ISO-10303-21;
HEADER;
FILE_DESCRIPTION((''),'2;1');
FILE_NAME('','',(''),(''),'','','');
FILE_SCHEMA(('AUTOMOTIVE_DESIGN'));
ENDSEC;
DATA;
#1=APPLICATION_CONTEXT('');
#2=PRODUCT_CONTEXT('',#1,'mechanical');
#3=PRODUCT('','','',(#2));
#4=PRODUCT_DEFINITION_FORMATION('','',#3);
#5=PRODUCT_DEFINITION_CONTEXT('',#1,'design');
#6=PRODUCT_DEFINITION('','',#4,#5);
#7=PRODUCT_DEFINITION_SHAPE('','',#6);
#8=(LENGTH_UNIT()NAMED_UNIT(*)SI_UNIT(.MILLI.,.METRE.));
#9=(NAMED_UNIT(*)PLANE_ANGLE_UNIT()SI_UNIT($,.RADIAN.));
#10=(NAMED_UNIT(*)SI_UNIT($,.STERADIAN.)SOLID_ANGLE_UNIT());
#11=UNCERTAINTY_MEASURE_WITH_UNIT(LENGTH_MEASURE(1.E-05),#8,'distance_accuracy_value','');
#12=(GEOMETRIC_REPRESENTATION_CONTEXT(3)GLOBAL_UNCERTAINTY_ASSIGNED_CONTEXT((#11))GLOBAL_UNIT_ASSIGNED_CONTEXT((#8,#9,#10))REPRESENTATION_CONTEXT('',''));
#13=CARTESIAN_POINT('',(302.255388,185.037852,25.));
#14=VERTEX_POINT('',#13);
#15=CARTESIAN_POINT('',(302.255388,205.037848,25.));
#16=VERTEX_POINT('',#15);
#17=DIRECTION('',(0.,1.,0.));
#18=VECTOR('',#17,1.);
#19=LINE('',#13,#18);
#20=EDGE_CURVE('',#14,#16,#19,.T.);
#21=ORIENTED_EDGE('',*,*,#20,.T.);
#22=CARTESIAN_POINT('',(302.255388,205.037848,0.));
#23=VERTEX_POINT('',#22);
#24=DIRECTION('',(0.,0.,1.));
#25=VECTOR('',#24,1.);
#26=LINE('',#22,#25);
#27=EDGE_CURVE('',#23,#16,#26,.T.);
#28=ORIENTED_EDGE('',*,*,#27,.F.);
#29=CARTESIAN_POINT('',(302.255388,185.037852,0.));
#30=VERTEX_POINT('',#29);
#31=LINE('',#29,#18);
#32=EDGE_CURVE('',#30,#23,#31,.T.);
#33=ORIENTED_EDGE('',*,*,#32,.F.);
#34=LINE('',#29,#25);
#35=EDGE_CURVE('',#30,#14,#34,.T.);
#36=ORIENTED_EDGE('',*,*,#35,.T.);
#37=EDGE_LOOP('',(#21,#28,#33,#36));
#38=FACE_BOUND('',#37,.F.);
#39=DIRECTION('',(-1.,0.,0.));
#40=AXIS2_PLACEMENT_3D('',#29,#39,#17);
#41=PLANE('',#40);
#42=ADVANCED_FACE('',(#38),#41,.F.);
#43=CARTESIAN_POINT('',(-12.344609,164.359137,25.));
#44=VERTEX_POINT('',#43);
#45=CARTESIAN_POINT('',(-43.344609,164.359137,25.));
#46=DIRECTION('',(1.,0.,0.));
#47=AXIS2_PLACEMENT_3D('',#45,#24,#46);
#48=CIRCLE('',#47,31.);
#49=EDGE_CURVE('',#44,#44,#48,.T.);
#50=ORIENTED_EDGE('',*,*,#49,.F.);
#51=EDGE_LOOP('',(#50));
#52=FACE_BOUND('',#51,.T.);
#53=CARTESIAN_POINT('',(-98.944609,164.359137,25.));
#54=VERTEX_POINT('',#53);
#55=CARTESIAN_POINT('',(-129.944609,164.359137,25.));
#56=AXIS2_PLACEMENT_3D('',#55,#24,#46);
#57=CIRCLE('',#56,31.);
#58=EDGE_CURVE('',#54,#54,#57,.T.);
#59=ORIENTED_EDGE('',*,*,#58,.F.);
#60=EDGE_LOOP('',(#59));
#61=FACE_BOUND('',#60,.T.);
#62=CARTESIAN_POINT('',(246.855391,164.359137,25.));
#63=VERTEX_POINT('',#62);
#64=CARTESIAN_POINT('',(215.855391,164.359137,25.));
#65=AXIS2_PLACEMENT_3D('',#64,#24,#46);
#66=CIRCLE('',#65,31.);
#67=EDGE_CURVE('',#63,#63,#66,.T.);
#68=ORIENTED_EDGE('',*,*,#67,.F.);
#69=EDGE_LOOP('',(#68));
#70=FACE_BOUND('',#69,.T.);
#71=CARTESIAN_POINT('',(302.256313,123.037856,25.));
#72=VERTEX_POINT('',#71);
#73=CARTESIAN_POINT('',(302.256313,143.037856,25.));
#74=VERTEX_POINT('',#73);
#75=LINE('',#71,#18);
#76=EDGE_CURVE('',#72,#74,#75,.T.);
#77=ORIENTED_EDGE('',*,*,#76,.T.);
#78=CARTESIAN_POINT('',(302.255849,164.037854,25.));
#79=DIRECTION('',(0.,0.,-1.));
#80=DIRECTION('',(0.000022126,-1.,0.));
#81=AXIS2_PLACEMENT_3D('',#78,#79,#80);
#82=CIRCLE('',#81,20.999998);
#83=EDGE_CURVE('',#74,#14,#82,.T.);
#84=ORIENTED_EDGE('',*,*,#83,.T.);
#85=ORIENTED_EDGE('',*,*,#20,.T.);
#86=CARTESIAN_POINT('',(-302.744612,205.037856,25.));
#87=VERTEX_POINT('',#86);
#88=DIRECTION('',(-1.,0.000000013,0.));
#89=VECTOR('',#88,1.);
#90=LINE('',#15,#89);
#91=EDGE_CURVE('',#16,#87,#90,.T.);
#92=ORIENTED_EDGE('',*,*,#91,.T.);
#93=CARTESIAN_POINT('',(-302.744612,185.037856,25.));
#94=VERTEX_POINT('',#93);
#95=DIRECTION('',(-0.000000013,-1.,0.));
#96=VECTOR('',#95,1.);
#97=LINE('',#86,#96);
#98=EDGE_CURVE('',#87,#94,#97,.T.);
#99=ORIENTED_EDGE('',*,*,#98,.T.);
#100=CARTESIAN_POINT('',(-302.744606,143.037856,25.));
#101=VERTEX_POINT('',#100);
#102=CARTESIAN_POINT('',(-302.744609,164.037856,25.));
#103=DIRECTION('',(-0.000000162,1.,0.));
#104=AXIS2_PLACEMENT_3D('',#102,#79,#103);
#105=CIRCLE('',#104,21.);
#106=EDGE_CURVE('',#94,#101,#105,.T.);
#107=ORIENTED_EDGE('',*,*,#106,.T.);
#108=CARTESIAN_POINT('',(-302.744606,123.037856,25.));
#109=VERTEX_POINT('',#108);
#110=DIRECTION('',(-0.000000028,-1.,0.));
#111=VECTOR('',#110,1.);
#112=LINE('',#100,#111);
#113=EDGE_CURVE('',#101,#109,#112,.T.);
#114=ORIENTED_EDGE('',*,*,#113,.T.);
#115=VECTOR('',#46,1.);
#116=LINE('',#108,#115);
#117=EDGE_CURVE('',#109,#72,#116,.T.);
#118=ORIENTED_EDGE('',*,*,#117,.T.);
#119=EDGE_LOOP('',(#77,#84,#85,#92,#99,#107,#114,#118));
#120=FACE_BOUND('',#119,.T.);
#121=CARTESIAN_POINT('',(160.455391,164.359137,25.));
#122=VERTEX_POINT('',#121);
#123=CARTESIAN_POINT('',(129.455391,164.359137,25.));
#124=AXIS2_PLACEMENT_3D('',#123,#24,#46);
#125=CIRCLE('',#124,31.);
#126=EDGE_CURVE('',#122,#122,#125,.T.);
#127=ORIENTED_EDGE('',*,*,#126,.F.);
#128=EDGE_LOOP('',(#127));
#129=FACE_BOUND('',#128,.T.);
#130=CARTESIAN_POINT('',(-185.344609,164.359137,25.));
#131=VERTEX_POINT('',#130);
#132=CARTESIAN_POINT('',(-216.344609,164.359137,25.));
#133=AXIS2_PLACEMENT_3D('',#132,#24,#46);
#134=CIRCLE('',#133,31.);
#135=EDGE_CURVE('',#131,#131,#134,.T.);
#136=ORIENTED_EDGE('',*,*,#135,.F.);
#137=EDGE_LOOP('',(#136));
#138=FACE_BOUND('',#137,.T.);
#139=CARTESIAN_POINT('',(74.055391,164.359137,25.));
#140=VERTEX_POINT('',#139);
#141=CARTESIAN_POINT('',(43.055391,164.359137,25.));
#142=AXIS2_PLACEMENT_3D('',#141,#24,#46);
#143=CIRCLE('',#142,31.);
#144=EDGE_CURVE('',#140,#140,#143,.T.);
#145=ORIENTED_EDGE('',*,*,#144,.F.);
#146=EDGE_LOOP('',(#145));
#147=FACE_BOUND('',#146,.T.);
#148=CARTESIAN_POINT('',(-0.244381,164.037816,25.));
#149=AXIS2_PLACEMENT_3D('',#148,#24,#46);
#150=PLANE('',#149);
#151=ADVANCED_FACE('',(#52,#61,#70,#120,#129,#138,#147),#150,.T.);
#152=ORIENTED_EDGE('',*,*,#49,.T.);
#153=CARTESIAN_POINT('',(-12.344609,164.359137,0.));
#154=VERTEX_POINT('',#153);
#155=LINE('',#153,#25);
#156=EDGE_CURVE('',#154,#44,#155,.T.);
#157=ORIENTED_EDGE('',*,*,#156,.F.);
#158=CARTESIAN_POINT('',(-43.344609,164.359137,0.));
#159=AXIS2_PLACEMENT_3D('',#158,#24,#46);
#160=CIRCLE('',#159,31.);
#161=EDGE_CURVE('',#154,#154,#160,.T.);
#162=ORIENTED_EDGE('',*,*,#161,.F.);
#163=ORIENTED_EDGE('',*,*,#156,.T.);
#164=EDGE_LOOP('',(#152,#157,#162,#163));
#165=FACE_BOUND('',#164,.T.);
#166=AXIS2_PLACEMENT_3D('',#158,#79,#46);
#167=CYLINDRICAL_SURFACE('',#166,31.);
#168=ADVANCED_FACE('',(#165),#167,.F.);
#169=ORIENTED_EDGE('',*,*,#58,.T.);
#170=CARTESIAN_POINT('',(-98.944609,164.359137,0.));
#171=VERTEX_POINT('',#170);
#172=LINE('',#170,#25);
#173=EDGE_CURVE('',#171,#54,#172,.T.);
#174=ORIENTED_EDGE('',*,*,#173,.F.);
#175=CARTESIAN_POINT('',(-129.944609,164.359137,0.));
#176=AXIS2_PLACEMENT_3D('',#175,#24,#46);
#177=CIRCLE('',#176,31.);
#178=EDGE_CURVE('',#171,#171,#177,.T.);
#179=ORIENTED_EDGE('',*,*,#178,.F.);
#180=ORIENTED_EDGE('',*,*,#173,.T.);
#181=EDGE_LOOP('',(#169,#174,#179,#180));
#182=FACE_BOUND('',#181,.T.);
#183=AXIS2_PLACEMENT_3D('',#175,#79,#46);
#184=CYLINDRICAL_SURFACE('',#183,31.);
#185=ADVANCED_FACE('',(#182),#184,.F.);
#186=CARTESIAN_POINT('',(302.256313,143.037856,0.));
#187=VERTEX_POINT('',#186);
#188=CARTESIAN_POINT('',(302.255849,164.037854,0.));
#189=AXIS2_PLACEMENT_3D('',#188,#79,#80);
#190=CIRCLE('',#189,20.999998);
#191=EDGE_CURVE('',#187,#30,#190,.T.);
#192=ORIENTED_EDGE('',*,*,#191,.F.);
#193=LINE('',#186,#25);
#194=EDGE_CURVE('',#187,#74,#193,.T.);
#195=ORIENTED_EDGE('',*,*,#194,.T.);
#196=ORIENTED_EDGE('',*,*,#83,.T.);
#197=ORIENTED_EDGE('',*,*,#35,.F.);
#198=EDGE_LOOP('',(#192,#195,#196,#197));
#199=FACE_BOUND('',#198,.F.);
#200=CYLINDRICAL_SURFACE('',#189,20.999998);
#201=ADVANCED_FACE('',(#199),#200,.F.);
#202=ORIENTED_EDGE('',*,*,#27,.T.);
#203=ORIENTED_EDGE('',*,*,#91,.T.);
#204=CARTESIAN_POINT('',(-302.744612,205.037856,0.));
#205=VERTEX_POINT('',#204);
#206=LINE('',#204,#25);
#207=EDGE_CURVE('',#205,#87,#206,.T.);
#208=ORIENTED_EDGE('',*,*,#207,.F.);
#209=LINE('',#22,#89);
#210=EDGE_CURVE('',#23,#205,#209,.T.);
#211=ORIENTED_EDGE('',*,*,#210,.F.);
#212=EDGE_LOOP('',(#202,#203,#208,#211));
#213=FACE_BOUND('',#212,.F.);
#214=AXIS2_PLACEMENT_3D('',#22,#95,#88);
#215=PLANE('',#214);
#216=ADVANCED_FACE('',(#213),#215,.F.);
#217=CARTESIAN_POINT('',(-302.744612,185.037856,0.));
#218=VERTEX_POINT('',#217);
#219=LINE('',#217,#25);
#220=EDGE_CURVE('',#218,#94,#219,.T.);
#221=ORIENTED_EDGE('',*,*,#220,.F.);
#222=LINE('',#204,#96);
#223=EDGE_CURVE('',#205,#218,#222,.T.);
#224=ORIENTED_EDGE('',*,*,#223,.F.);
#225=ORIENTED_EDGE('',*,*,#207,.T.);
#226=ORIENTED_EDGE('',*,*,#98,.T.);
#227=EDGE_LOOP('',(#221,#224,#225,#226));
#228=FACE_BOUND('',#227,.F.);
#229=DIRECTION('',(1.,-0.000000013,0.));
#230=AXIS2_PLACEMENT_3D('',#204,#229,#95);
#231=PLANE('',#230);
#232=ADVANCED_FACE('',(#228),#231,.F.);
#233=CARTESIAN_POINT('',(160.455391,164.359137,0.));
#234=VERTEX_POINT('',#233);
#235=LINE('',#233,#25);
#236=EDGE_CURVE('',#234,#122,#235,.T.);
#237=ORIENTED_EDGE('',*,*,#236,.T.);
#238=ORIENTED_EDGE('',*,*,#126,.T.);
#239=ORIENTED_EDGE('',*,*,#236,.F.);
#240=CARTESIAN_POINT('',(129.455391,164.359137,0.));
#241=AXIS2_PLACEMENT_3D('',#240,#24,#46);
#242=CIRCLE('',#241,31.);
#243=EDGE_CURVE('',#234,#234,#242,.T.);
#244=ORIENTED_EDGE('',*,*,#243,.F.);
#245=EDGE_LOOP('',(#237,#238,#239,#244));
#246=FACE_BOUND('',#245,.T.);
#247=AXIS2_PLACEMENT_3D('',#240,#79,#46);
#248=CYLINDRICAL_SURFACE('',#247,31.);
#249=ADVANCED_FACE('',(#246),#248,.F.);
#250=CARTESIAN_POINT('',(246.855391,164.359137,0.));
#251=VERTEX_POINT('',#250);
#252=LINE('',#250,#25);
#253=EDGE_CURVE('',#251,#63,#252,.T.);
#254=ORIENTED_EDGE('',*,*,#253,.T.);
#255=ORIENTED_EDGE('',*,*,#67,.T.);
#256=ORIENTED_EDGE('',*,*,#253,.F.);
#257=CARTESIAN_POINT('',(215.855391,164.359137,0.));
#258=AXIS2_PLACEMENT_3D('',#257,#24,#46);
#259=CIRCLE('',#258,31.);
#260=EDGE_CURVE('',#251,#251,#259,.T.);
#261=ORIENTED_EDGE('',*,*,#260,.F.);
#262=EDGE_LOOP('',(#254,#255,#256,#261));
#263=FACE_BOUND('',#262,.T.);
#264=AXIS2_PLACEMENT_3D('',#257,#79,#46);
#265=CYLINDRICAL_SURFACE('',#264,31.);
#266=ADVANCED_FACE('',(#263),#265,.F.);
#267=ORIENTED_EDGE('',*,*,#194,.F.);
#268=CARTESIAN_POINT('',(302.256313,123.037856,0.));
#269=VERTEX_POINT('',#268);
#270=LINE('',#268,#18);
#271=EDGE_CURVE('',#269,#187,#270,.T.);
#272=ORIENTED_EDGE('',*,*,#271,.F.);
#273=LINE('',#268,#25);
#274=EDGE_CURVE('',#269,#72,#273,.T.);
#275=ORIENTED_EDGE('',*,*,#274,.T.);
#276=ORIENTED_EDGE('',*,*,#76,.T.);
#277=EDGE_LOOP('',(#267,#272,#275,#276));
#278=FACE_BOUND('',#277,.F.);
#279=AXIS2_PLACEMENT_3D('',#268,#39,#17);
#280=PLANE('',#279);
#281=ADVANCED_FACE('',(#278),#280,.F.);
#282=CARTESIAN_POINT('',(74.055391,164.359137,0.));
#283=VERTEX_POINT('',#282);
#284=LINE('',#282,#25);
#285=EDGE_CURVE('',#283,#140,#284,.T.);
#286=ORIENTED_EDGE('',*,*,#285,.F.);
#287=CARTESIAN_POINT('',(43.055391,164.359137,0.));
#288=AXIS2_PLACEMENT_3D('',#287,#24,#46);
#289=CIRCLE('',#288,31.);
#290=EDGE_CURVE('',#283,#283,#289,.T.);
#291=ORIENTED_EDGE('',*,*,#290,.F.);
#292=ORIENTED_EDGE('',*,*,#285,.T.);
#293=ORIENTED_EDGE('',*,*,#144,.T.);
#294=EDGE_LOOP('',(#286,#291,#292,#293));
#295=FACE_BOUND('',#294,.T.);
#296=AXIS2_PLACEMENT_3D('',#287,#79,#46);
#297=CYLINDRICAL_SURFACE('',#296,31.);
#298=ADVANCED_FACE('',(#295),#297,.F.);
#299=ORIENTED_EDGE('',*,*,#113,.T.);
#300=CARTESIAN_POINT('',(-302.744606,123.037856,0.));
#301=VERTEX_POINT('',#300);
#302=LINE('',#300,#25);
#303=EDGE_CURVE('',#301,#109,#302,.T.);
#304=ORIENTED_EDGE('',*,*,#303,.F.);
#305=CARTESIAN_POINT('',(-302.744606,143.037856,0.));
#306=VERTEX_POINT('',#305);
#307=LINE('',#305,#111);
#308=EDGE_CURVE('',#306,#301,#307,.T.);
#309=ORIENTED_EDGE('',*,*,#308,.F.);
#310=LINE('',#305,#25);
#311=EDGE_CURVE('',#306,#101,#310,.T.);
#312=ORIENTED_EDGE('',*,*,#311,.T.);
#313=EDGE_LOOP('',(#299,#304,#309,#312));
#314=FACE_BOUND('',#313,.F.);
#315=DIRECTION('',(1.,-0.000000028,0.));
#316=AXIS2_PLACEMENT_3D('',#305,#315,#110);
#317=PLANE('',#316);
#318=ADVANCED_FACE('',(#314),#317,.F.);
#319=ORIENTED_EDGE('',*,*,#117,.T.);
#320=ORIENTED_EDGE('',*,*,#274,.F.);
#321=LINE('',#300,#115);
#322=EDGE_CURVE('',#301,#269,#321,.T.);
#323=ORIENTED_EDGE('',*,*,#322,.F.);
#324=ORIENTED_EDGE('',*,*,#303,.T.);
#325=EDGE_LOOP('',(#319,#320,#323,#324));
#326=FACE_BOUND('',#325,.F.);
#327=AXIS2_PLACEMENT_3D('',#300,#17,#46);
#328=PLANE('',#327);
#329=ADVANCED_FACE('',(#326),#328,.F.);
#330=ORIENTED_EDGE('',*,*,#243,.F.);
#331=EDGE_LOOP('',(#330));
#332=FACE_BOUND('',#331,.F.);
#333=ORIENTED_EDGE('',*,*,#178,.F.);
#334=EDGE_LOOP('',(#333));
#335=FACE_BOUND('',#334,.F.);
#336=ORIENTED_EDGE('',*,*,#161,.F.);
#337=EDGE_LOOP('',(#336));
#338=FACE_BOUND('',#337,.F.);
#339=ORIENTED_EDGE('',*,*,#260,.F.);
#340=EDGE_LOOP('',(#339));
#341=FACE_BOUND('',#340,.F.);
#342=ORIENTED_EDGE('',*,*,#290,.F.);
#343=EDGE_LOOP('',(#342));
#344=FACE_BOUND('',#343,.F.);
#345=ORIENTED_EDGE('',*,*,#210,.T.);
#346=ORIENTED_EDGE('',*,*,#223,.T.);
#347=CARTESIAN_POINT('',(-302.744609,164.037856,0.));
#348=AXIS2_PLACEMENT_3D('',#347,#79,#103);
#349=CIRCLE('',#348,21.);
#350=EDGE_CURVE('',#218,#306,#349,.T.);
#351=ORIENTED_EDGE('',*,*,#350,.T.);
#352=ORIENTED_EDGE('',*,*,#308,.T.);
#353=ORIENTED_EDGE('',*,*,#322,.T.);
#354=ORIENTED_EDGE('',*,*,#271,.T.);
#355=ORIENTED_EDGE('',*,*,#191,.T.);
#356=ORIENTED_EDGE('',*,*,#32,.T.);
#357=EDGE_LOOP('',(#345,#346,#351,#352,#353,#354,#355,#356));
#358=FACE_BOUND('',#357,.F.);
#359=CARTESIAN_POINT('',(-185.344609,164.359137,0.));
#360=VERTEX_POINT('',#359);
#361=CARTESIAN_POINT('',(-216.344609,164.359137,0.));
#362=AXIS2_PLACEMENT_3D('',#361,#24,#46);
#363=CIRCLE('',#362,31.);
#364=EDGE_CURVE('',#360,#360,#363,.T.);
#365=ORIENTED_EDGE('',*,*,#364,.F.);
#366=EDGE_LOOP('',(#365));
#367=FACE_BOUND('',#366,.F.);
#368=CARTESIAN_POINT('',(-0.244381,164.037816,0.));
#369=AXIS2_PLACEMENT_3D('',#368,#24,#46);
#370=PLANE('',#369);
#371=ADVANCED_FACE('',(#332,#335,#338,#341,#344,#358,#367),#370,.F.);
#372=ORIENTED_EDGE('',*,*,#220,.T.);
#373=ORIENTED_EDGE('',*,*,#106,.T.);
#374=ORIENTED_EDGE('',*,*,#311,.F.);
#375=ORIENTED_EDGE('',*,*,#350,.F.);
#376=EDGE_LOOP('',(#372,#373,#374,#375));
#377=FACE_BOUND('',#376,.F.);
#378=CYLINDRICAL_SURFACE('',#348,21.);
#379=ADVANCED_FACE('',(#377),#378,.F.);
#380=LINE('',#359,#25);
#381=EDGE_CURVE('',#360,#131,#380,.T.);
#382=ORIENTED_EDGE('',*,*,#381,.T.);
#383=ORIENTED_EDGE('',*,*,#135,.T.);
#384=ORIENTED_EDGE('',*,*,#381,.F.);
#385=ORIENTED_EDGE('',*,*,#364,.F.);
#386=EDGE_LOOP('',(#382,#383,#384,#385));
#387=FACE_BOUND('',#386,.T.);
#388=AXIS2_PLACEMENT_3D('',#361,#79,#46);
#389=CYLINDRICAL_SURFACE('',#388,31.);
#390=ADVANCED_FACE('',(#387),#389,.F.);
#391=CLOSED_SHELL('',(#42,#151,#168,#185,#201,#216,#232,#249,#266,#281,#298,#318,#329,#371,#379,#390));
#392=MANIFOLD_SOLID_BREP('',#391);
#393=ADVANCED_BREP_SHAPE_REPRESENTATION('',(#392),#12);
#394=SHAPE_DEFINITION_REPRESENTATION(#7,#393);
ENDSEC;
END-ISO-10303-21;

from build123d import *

# Parameters (mm, degrees)
F0_R     = 31
F1_DEPTH = 25


# Not quite as in the source:
# - ends of sketch curves that miss each other by under 0.0002 mm in the source are joined


with BuildPart() as f1:
    # F0 (on Top) → F1 (new body)
    with BuildSketch(Plane.XY):
        with BuildLine():
            Line((-302.7446055809, 143.0378559404), (-302.7446061336, 123.0378559404))
            Line((-302.7446061336, 123.0378559404), (302.2563133603, 123.0378559404))
            Line((302.2563133603, 123.0378559404), (302.2563133603, 143.0378559404))
            ThreePointArc((302.2563133603, 143.0378559404), (281.2558506145, 164.0373893883), (302.2553878584, 185.0378521342))
            Line((302.2553878584, 185.0378521342), (302.2553878585, 205.0378483381))
            Line((302.2553878585, 205.0378483381), (-302.7446121415, 205.0378559404))
            Line((-302.7446121415, 205.0378559404), (-302.7446123928, 185.0378559404))
            ThreePointArc((-302.7446123928, 185.0378559404), (-281.7446089869, 164.0378593463), (-302.7446055809, 143.0378559404))
        make_face()
        with Locations((-216.3446089869, 164.3591374159)):
            Circle(F0_R, mode=Mode.SUBTRACT)
        with Locations((-129.9446089869, 164.3591374159)):
            Circle(F0_R, mode=Mode.SUBTRACT)
        with Locations((-43.3446089869, 164.3591374159)):
            Circle(F0_R, mode=Mode.SUBTRACT)
        with Locations((43.0553910131, 164.3591374159)):
            Circle(F0_R, mode=Mode.SUBTRACT)
        with Locations((129.4553910131, 164.3591374159)):
            Circle(F0_R, mode=Mode.SUBTRACT)
        with Locations((215.8553910131, 164.3591374159)):
            Circle(F0_R, mode=Mode.SUBTRACT)
    extrude(amount=F1_DEPTH)


solid = f1.part
